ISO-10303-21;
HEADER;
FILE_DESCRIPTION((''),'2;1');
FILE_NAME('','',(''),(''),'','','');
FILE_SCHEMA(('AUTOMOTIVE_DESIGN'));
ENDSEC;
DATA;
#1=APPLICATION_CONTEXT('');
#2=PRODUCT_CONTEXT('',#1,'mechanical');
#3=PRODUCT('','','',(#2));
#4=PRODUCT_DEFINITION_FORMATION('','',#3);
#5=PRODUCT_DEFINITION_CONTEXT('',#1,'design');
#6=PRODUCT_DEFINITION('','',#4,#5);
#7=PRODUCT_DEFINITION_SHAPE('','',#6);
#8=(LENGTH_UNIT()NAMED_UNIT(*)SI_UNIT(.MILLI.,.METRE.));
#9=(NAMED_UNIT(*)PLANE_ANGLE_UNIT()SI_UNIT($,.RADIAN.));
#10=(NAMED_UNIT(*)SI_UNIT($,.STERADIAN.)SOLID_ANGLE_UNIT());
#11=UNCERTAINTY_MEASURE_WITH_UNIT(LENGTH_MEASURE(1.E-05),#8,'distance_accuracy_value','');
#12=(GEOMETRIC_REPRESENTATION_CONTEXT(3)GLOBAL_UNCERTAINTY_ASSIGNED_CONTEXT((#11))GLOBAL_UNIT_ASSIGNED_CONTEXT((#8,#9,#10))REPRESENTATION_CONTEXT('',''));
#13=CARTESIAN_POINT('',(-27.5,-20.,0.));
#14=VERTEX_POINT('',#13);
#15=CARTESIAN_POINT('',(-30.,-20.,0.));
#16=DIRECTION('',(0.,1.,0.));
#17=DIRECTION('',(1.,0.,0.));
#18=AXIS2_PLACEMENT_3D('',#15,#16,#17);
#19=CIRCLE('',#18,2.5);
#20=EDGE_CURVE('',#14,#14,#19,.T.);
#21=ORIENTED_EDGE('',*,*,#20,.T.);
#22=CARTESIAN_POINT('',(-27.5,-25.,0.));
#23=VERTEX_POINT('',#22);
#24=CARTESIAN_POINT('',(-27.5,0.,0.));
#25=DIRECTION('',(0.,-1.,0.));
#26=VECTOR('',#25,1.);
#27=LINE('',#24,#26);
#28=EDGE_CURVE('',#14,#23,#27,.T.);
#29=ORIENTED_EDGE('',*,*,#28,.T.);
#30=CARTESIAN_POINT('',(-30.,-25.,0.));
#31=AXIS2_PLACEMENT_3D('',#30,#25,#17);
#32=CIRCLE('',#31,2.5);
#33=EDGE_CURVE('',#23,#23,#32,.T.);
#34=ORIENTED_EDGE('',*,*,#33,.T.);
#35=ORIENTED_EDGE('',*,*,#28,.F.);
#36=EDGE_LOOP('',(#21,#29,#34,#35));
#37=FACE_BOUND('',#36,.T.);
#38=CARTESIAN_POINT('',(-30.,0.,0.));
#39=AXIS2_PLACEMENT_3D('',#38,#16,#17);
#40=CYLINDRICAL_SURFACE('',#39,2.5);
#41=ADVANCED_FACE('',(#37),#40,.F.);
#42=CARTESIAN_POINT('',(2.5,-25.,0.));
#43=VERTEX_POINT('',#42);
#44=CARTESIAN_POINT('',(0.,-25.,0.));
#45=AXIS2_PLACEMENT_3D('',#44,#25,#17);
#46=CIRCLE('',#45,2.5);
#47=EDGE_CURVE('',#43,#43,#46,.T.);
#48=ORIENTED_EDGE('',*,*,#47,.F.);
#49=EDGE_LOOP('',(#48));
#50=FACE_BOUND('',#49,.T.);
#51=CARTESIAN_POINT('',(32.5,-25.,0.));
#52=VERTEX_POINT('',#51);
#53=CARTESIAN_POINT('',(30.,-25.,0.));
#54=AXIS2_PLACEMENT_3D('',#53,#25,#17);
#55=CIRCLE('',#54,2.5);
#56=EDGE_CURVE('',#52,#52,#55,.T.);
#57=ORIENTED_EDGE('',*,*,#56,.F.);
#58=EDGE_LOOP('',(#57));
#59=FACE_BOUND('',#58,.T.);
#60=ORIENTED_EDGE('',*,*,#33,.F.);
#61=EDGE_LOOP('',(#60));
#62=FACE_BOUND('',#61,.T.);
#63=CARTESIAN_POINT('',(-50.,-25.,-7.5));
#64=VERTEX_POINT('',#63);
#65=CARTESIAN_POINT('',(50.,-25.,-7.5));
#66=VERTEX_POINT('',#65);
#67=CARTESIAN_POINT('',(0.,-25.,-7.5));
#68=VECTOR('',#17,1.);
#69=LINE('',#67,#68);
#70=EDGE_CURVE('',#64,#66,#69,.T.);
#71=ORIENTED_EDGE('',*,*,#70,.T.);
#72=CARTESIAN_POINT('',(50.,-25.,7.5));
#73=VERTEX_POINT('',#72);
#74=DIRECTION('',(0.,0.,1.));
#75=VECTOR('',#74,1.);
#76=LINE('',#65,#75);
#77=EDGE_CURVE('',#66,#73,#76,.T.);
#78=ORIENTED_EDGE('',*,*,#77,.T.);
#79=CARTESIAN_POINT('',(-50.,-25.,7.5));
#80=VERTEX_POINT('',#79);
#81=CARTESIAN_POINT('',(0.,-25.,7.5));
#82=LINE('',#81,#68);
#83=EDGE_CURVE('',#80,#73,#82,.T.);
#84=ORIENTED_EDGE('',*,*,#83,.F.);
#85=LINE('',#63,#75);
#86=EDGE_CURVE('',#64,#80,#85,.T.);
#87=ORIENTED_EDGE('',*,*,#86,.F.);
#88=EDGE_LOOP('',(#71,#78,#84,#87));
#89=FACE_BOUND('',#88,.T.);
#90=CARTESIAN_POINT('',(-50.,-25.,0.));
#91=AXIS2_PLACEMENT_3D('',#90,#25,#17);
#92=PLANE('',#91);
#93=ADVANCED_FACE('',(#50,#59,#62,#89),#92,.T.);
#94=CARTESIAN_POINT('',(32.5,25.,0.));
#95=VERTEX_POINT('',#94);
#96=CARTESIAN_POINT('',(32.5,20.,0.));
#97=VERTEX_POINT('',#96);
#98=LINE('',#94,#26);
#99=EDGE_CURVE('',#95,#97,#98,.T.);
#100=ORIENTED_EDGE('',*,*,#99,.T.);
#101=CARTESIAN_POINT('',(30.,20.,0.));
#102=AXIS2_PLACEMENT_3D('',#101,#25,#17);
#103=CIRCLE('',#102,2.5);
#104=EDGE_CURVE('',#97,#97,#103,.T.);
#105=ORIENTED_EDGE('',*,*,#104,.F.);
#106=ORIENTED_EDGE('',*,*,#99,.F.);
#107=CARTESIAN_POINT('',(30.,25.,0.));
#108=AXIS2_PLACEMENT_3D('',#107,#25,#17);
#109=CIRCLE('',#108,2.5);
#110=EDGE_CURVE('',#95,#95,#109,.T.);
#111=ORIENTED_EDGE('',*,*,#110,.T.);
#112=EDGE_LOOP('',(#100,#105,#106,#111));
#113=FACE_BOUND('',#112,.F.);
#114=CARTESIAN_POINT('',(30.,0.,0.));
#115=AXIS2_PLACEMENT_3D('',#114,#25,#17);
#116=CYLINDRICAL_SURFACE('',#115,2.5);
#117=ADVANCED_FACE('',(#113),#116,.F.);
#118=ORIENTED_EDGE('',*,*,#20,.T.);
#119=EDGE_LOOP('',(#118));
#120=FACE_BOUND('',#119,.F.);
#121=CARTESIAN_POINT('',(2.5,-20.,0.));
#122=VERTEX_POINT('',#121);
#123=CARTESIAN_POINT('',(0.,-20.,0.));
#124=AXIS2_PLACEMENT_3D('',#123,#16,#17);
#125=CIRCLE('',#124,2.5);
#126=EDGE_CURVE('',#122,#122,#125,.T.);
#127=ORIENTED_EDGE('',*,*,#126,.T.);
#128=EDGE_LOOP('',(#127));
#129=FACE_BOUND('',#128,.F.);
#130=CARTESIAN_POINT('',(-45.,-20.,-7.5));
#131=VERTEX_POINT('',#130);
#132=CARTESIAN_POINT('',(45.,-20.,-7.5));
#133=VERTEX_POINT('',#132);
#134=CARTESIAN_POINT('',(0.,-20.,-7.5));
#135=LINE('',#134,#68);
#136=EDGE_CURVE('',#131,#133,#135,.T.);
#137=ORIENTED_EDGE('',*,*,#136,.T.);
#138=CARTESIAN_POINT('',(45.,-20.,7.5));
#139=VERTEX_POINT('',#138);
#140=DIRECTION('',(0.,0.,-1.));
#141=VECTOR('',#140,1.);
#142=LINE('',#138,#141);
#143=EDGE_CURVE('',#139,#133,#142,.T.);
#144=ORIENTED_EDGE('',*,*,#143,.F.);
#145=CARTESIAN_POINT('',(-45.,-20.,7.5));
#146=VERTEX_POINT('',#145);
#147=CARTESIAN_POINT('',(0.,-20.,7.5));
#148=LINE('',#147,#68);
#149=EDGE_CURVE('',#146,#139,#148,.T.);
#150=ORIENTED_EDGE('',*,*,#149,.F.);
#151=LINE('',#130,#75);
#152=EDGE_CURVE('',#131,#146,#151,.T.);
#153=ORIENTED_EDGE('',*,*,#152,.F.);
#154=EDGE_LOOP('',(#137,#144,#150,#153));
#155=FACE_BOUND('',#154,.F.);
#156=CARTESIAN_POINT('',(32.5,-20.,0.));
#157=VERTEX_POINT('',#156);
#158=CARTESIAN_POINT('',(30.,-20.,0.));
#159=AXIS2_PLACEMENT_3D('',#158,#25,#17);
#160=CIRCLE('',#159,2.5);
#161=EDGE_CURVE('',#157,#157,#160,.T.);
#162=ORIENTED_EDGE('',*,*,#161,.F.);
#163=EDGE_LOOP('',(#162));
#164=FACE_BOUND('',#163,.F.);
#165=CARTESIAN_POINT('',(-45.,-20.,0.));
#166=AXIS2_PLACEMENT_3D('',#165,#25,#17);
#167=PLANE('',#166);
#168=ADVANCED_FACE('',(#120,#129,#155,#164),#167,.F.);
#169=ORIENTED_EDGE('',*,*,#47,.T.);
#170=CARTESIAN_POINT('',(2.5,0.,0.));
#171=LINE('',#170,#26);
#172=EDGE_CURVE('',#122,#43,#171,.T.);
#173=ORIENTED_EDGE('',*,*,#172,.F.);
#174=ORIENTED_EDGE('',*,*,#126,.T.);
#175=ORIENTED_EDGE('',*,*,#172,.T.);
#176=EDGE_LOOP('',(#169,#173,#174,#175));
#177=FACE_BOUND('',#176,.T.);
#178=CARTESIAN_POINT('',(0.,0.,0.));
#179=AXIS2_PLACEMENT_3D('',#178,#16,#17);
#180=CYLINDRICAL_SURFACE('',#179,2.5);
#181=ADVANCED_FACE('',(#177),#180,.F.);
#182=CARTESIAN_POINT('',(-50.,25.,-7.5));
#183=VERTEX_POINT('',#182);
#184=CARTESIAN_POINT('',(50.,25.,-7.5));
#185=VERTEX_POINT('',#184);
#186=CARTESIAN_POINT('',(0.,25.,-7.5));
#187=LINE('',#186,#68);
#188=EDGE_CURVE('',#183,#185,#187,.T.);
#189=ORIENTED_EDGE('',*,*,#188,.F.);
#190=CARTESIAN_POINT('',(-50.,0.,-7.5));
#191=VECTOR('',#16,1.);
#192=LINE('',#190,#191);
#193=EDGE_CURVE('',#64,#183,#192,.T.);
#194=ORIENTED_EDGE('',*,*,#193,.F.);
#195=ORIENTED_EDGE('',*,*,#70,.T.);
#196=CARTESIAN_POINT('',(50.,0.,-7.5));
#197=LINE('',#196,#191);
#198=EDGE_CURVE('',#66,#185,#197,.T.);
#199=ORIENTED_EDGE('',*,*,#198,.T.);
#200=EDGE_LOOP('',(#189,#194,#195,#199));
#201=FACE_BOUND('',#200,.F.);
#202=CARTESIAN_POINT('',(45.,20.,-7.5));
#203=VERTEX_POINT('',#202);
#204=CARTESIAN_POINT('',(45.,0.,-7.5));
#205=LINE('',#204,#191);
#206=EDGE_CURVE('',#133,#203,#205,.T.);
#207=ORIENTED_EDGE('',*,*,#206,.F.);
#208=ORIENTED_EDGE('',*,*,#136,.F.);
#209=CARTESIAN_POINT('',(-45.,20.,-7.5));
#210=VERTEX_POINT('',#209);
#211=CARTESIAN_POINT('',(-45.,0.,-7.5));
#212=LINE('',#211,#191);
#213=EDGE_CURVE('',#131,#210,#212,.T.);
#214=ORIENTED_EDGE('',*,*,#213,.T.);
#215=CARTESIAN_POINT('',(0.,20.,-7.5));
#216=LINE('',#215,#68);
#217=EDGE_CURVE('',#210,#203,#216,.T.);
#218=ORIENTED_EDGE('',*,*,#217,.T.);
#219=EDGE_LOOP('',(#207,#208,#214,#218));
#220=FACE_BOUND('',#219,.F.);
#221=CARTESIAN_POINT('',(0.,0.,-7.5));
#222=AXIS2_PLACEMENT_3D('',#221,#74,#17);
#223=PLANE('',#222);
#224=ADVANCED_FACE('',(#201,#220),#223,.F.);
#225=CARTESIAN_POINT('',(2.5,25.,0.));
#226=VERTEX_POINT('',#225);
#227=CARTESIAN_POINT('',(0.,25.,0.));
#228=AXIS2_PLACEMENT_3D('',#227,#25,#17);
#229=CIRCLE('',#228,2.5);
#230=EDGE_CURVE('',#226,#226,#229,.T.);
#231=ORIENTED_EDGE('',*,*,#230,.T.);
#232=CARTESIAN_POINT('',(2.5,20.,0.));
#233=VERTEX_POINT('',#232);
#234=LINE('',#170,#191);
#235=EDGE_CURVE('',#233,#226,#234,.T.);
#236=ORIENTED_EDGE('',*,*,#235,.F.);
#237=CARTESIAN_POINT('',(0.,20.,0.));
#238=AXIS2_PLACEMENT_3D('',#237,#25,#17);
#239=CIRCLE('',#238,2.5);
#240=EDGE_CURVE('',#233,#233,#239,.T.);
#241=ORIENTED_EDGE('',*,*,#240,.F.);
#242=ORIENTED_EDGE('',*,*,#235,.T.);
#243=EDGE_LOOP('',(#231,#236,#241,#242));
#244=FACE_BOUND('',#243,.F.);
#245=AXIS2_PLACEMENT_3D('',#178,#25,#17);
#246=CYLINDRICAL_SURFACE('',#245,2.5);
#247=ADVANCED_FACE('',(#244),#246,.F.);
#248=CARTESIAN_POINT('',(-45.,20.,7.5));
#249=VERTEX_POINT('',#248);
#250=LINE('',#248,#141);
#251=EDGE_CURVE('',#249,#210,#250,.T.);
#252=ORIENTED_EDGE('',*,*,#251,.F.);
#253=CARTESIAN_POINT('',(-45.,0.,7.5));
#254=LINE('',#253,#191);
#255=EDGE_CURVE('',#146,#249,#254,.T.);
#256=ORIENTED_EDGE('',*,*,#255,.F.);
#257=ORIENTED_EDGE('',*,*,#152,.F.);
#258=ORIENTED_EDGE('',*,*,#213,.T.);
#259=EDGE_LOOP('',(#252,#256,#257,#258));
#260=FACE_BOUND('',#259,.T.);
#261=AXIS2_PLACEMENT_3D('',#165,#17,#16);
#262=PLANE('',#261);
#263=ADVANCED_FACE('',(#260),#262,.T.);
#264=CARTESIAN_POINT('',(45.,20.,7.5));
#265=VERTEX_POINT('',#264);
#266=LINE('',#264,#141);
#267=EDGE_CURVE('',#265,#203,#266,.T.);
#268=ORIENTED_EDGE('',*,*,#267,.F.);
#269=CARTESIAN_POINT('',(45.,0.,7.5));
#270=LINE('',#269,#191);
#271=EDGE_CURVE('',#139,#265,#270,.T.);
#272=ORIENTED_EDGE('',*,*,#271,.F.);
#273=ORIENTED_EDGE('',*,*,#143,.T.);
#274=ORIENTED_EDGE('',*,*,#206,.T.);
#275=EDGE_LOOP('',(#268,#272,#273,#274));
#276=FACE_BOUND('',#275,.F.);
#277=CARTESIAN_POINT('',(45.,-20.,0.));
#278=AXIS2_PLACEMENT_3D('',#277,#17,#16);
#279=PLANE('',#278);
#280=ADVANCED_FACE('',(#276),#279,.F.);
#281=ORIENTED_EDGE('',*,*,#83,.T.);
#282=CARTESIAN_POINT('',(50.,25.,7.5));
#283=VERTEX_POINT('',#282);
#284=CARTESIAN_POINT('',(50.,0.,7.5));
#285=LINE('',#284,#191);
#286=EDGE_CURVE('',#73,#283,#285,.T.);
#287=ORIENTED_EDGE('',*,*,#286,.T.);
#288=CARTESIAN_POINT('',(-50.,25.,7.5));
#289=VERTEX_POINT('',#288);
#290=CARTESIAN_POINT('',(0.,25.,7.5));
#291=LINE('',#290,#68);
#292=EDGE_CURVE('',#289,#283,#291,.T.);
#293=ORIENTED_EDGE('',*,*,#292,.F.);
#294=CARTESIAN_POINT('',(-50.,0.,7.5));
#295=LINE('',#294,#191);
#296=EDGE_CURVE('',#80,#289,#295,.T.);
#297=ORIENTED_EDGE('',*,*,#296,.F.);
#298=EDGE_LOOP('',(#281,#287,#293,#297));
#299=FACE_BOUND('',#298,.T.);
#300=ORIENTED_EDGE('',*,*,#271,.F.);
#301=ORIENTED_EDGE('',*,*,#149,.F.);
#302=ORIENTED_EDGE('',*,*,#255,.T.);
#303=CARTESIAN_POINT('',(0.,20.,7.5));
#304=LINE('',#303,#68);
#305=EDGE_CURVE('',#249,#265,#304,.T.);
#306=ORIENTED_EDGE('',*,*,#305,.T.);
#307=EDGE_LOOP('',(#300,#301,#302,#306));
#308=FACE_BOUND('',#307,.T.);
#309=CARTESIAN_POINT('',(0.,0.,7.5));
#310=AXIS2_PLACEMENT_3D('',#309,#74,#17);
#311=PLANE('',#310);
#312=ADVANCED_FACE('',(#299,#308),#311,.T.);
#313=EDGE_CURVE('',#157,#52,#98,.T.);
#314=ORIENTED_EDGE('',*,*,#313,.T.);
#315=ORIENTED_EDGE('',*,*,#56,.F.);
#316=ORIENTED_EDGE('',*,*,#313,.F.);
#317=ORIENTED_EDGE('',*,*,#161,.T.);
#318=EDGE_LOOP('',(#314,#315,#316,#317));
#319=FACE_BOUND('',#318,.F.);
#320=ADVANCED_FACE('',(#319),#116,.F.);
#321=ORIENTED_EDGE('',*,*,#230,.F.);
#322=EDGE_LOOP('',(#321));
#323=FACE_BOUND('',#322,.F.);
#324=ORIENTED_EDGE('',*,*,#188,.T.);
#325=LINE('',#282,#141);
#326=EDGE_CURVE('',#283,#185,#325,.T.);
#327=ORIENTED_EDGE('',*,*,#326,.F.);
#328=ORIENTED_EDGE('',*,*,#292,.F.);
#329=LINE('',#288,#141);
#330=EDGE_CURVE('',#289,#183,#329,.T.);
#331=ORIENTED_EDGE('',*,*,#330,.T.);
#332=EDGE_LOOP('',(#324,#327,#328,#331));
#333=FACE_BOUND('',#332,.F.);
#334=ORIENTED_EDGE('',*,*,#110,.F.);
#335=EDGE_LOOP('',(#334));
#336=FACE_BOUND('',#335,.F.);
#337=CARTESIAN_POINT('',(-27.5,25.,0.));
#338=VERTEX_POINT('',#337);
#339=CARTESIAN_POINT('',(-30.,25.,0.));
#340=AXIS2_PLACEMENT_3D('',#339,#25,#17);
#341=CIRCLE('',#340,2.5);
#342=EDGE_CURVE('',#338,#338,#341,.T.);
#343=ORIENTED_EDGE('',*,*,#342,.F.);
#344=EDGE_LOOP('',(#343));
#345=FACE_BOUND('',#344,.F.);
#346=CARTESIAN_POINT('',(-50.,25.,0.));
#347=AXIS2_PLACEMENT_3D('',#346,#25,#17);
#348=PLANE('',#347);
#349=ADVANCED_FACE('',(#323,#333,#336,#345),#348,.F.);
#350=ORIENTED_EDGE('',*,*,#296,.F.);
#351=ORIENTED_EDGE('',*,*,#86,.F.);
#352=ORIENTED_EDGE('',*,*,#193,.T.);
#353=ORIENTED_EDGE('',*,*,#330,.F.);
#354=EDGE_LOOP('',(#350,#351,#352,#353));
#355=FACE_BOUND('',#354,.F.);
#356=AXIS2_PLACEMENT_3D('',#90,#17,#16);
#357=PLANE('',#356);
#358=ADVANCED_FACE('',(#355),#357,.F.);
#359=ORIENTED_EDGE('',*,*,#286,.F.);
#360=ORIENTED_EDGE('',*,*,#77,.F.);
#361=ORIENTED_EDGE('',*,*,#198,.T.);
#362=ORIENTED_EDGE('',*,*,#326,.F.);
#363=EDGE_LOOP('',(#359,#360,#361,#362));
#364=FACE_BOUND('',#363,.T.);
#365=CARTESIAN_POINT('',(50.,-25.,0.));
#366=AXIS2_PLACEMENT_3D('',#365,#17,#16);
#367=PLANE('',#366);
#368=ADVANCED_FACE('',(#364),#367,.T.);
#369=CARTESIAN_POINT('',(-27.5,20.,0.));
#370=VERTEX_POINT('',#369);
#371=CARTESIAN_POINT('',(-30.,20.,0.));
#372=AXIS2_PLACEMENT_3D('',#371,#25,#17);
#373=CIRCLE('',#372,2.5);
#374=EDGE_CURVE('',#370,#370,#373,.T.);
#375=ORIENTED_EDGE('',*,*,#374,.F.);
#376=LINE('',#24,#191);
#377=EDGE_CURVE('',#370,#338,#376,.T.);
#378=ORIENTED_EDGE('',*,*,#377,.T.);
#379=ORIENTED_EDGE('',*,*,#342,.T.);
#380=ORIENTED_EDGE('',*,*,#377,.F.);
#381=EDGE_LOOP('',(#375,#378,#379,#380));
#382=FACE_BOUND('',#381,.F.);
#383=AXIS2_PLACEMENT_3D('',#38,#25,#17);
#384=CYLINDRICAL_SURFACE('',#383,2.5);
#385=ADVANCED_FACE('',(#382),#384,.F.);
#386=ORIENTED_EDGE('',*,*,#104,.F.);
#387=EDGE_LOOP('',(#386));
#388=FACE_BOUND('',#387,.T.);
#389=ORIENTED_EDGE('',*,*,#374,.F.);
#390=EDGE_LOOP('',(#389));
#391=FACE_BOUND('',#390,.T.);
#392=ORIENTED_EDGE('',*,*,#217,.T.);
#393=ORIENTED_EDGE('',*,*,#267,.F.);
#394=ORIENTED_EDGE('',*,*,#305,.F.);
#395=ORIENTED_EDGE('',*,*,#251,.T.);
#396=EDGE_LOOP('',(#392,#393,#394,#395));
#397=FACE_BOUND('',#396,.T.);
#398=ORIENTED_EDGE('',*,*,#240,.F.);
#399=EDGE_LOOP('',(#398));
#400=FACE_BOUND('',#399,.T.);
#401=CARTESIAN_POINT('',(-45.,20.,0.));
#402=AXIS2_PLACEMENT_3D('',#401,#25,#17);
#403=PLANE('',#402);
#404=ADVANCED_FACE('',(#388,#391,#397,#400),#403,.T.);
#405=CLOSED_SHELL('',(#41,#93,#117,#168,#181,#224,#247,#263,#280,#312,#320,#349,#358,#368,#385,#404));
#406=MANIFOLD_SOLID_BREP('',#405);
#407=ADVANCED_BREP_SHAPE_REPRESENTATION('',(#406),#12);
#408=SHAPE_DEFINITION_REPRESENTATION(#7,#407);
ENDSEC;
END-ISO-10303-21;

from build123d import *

# Parameters (mm, degrees)
F0_W     = 100
F0_H     = 50
F0_W_2   = 90
F0_H_2   = 40
F1_DEPTH = 7.5
F2_R     = 2.5
F3_DEPTH = 25


with BuildPart() as f1:
    # F0 (on Top) → F1 (new body, symmetric)
    with BuildSketch(Plane.XY):
        Rectangle(F0_W, F0_H)
        Rectangle(F0_W_2, F0_H_2, mode=Mode.SUBTRACT)
    extrude(amount=F1_DEPTH, both=True)

    # F2 (on Front) → F3 (cut, symmetric)
    with BuildSketch(Plane.XZ):
        Circle(F2_R)
        with Locations((-30, 0)):
            Circle(F2_R)
        with Locations((30, 0)):
            Circle(F2_R)
    extrude(amount=F3_DEPTH, both=True, mode=Mode.SUBTRACT)


solid = f1.part
